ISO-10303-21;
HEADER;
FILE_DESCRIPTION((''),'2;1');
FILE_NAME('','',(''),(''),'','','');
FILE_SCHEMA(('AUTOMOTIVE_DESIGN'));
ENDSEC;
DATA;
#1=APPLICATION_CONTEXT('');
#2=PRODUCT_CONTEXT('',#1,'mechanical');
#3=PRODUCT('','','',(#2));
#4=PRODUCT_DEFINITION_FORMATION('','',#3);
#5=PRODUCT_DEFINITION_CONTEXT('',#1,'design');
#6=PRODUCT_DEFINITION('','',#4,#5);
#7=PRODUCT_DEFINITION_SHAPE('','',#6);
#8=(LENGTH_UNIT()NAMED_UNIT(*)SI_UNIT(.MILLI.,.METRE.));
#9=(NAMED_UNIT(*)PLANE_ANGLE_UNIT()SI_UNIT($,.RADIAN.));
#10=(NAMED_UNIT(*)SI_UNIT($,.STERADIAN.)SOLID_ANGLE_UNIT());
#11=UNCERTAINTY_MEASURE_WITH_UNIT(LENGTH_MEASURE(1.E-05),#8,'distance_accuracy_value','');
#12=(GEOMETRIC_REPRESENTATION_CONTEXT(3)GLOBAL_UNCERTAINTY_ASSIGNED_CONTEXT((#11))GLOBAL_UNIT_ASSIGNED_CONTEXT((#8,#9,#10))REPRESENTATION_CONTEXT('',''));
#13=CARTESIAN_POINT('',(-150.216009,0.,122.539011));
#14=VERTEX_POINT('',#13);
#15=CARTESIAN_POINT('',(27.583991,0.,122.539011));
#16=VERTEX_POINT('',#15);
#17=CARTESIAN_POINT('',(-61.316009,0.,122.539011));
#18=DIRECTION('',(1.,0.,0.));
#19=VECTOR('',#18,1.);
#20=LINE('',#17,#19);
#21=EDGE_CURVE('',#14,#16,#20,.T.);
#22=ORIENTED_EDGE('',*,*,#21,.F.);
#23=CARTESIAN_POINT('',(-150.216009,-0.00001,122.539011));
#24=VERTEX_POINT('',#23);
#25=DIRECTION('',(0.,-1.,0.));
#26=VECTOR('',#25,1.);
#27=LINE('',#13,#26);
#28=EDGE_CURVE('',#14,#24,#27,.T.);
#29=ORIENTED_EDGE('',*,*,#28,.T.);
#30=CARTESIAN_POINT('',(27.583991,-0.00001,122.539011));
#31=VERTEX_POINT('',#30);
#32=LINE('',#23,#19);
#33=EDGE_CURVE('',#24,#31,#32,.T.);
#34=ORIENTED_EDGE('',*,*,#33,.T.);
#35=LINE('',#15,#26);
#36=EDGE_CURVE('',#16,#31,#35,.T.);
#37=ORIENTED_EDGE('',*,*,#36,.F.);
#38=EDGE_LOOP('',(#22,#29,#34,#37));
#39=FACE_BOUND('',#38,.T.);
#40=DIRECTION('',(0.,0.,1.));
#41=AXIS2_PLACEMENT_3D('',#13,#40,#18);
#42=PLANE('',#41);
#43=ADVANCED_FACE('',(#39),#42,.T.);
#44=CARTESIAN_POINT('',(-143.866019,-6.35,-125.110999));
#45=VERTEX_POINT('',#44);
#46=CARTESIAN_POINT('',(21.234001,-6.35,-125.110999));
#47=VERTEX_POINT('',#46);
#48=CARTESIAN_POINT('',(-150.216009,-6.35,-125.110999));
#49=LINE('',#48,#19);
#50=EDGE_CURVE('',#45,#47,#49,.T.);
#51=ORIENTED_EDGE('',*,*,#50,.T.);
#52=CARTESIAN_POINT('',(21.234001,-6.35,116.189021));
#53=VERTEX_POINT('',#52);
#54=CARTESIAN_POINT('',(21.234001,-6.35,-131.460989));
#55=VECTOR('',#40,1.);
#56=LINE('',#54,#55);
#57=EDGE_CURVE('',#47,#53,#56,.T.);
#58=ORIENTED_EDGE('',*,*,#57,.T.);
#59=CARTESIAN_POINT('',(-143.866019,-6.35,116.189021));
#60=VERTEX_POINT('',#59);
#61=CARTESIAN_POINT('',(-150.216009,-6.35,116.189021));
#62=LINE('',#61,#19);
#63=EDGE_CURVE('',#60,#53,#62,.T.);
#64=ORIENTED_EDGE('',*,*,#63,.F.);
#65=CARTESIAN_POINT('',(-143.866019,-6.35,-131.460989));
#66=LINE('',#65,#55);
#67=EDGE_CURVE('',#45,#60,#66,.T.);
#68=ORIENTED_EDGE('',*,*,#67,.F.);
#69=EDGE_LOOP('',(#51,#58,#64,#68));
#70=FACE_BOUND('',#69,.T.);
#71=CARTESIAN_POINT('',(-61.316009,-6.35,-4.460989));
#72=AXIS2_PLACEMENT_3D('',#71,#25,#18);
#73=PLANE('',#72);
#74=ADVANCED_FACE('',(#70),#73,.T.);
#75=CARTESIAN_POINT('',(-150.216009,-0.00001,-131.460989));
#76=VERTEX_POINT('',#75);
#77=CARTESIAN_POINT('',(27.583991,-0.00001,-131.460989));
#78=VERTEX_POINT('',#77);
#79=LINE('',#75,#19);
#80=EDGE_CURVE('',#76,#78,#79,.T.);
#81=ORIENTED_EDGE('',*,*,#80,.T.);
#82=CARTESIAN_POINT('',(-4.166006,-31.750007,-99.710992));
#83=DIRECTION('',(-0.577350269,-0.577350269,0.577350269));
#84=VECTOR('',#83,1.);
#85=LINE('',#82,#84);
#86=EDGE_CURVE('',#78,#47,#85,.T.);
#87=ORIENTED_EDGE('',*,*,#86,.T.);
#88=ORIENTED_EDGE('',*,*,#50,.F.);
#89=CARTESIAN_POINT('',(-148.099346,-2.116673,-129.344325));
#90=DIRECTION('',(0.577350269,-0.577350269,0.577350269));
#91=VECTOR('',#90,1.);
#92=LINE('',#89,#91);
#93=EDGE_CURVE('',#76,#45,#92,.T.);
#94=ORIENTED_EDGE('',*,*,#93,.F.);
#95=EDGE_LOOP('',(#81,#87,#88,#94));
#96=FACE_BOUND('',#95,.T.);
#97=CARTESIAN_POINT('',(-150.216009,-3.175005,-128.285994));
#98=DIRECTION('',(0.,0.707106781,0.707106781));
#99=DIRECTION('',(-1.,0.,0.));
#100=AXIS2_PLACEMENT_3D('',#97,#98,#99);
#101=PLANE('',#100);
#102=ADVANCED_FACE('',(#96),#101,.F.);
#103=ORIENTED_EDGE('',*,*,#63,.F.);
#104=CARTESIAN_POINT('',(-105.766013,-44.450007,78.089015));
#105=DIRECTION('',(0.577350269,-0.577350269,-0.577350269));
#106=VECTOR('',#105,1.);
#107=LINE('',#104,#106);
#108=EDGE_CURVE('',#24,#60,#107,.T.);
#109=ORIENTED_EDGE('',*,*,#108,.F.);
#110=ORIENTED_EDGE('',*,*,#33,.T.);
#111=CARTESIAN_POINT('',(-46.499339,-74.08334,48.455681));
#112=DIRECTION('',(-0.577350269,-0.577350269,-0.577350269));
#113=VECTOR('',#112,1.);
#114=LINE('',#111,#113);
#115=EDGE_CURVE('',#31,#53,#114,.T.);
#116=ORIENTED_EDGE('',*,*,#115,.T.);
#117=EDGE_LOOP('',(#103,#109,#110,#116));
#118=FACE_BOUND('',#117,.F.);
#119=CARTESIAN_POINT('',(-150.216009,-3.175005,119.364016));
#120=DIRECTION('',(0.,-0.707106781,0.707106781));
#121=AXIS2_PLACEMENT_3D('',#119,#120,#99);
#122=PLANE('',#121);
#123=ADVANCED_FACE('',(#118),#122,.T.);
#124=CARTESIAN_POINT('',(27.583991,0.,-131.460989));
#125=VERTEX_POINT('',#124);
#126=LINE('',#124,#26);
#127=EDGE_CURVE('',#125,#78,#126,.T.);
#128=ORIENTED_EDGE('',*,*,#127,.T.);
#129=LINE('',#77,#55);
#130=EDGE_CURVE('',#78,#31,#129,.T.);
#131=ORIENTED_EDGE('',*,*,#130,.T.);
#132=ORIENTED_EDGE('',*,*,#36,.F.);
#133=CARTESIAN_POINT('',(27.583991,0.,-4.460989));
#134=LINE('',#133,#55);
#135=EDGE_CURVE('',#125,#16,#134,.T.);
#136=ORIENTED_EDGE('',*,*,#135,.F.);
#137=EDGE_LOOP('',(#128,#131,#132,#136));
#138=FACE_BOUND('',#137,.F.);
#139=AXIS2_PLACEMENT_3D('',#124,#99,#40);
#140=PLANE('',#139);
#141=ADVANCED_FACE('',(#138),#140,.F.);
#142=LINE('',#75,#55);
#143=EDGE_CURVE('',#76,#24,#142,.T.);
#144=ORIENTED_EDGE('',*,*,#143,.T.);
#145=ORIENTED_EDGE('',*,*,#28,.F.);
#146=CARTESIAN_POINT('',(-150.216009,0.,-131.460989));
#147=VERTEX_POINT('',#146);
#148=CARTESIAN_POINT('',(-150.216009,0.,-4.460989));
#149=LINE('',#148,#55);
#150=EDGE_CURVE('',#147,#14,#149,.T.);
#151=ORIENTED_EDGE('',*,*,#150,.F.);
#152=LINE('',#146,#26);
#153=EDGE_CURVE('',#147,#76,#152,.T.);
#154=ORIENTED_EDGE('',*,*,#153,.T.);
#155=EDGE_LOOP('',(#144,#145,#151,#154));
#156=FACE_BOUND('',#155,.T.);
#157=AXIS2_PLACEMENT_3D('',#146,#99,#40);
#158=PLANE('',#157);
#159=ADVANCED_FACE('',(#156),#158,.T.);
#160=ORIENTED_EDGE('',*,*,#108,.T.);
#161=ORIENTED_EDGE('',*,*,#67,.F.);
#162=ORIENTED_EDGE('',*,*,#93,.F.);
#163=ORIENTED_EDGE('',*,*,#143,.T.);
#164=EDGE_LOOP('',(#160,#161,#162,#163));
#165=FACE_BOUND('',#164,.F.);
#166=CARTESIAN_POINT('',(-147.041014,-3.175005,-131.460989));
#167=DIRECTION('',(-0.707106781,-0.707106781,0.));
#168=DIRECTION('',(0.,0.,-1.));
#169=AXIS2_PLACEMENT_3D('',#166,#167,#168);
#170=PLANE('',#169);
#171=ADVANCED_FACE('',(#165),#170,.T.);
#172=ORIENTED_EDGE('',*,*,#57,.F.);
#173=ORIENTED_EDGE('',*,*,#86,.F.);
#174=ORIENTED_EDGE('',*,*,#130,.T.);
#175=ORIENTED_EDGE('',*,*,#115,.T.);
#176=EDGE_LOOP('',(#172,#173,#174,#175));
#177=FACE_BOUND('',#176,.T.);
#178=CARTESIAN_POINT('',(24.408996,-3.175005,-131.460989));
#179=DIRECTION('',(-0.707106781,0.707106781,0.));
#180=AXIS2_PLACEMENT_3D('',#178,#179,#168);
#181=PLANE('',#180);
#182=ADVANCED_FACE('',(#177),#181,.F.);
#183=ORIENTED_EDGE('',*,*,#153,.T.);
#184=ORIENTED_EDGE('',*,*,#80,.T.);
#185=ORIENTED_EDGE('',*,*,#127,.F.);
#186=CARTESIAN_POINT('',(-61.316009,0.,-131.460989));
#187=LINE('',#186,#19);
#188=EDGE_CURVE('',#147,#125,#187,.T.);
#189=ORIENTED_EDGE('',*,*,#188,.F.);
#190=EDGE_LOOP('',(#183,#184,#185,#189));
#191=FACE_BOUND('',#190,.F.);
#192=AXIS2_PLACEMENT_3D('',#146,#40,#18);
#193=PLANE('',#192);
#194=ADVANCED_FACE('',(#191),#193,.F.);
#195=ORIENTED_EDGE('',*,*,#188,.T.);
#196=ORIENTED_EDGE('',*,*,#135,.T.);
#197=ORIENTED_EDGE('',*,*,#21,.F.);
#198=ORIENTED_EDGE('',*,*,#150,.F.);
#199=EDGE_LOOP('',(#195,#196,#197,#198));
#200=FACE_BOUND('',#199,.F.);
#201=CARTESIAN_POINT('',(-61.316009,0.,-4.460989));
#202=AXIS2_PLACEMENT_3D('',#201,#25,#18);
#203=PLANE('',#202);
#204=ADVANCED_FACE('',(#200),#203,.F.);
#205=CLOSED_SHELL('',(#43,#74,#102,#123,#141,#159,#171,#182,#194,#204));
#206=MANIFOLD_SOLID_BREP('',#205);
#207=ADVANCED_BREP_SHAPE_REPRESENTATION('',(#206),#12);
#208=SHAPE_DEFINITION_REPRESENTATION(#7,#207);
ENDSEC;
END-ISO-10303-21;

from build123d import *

# Parameters (mm, degrees)
F0_W     = 177.8
F0_H     = 254
F1_DEPTH = 6.35
F2_SIZE2 = 6.34999
F2_SIZE  = 6.34999


# Not quite as in the source:
# - a fillet or chamfer is up to 0.001 mm smaller than in the source, because OpenCascade refuses the exact size


with BuildPart() as f1:
    # F0 (on Front) → F1 (new body)
    with BuildSketch(Plane.XZ):
        with Locations((-61.3160093542, -4.4609885663)):
            Rectangle(F0_W, F0_H)
    extrude(amount=F1_DEPTH)

    # F2 (size 6.35 and 6.35 in the source; OpenCascade refuses exactly that, so slightly less here)
    f2_edges = [f1.edges().sort_by_distance(p)[0] for p in [
        (-61.316009, -6.35, 122.539011),
        (-150.216009, -6.35, -4.460989),
        (-61.316009, -6.35, -131.460989),
        (27.583991, -6.35, -4.460989),
    ]]
    chamfer(f2_edges, length=F2_SIZE, length2=F2_SIZE2)


solid = f1.part
